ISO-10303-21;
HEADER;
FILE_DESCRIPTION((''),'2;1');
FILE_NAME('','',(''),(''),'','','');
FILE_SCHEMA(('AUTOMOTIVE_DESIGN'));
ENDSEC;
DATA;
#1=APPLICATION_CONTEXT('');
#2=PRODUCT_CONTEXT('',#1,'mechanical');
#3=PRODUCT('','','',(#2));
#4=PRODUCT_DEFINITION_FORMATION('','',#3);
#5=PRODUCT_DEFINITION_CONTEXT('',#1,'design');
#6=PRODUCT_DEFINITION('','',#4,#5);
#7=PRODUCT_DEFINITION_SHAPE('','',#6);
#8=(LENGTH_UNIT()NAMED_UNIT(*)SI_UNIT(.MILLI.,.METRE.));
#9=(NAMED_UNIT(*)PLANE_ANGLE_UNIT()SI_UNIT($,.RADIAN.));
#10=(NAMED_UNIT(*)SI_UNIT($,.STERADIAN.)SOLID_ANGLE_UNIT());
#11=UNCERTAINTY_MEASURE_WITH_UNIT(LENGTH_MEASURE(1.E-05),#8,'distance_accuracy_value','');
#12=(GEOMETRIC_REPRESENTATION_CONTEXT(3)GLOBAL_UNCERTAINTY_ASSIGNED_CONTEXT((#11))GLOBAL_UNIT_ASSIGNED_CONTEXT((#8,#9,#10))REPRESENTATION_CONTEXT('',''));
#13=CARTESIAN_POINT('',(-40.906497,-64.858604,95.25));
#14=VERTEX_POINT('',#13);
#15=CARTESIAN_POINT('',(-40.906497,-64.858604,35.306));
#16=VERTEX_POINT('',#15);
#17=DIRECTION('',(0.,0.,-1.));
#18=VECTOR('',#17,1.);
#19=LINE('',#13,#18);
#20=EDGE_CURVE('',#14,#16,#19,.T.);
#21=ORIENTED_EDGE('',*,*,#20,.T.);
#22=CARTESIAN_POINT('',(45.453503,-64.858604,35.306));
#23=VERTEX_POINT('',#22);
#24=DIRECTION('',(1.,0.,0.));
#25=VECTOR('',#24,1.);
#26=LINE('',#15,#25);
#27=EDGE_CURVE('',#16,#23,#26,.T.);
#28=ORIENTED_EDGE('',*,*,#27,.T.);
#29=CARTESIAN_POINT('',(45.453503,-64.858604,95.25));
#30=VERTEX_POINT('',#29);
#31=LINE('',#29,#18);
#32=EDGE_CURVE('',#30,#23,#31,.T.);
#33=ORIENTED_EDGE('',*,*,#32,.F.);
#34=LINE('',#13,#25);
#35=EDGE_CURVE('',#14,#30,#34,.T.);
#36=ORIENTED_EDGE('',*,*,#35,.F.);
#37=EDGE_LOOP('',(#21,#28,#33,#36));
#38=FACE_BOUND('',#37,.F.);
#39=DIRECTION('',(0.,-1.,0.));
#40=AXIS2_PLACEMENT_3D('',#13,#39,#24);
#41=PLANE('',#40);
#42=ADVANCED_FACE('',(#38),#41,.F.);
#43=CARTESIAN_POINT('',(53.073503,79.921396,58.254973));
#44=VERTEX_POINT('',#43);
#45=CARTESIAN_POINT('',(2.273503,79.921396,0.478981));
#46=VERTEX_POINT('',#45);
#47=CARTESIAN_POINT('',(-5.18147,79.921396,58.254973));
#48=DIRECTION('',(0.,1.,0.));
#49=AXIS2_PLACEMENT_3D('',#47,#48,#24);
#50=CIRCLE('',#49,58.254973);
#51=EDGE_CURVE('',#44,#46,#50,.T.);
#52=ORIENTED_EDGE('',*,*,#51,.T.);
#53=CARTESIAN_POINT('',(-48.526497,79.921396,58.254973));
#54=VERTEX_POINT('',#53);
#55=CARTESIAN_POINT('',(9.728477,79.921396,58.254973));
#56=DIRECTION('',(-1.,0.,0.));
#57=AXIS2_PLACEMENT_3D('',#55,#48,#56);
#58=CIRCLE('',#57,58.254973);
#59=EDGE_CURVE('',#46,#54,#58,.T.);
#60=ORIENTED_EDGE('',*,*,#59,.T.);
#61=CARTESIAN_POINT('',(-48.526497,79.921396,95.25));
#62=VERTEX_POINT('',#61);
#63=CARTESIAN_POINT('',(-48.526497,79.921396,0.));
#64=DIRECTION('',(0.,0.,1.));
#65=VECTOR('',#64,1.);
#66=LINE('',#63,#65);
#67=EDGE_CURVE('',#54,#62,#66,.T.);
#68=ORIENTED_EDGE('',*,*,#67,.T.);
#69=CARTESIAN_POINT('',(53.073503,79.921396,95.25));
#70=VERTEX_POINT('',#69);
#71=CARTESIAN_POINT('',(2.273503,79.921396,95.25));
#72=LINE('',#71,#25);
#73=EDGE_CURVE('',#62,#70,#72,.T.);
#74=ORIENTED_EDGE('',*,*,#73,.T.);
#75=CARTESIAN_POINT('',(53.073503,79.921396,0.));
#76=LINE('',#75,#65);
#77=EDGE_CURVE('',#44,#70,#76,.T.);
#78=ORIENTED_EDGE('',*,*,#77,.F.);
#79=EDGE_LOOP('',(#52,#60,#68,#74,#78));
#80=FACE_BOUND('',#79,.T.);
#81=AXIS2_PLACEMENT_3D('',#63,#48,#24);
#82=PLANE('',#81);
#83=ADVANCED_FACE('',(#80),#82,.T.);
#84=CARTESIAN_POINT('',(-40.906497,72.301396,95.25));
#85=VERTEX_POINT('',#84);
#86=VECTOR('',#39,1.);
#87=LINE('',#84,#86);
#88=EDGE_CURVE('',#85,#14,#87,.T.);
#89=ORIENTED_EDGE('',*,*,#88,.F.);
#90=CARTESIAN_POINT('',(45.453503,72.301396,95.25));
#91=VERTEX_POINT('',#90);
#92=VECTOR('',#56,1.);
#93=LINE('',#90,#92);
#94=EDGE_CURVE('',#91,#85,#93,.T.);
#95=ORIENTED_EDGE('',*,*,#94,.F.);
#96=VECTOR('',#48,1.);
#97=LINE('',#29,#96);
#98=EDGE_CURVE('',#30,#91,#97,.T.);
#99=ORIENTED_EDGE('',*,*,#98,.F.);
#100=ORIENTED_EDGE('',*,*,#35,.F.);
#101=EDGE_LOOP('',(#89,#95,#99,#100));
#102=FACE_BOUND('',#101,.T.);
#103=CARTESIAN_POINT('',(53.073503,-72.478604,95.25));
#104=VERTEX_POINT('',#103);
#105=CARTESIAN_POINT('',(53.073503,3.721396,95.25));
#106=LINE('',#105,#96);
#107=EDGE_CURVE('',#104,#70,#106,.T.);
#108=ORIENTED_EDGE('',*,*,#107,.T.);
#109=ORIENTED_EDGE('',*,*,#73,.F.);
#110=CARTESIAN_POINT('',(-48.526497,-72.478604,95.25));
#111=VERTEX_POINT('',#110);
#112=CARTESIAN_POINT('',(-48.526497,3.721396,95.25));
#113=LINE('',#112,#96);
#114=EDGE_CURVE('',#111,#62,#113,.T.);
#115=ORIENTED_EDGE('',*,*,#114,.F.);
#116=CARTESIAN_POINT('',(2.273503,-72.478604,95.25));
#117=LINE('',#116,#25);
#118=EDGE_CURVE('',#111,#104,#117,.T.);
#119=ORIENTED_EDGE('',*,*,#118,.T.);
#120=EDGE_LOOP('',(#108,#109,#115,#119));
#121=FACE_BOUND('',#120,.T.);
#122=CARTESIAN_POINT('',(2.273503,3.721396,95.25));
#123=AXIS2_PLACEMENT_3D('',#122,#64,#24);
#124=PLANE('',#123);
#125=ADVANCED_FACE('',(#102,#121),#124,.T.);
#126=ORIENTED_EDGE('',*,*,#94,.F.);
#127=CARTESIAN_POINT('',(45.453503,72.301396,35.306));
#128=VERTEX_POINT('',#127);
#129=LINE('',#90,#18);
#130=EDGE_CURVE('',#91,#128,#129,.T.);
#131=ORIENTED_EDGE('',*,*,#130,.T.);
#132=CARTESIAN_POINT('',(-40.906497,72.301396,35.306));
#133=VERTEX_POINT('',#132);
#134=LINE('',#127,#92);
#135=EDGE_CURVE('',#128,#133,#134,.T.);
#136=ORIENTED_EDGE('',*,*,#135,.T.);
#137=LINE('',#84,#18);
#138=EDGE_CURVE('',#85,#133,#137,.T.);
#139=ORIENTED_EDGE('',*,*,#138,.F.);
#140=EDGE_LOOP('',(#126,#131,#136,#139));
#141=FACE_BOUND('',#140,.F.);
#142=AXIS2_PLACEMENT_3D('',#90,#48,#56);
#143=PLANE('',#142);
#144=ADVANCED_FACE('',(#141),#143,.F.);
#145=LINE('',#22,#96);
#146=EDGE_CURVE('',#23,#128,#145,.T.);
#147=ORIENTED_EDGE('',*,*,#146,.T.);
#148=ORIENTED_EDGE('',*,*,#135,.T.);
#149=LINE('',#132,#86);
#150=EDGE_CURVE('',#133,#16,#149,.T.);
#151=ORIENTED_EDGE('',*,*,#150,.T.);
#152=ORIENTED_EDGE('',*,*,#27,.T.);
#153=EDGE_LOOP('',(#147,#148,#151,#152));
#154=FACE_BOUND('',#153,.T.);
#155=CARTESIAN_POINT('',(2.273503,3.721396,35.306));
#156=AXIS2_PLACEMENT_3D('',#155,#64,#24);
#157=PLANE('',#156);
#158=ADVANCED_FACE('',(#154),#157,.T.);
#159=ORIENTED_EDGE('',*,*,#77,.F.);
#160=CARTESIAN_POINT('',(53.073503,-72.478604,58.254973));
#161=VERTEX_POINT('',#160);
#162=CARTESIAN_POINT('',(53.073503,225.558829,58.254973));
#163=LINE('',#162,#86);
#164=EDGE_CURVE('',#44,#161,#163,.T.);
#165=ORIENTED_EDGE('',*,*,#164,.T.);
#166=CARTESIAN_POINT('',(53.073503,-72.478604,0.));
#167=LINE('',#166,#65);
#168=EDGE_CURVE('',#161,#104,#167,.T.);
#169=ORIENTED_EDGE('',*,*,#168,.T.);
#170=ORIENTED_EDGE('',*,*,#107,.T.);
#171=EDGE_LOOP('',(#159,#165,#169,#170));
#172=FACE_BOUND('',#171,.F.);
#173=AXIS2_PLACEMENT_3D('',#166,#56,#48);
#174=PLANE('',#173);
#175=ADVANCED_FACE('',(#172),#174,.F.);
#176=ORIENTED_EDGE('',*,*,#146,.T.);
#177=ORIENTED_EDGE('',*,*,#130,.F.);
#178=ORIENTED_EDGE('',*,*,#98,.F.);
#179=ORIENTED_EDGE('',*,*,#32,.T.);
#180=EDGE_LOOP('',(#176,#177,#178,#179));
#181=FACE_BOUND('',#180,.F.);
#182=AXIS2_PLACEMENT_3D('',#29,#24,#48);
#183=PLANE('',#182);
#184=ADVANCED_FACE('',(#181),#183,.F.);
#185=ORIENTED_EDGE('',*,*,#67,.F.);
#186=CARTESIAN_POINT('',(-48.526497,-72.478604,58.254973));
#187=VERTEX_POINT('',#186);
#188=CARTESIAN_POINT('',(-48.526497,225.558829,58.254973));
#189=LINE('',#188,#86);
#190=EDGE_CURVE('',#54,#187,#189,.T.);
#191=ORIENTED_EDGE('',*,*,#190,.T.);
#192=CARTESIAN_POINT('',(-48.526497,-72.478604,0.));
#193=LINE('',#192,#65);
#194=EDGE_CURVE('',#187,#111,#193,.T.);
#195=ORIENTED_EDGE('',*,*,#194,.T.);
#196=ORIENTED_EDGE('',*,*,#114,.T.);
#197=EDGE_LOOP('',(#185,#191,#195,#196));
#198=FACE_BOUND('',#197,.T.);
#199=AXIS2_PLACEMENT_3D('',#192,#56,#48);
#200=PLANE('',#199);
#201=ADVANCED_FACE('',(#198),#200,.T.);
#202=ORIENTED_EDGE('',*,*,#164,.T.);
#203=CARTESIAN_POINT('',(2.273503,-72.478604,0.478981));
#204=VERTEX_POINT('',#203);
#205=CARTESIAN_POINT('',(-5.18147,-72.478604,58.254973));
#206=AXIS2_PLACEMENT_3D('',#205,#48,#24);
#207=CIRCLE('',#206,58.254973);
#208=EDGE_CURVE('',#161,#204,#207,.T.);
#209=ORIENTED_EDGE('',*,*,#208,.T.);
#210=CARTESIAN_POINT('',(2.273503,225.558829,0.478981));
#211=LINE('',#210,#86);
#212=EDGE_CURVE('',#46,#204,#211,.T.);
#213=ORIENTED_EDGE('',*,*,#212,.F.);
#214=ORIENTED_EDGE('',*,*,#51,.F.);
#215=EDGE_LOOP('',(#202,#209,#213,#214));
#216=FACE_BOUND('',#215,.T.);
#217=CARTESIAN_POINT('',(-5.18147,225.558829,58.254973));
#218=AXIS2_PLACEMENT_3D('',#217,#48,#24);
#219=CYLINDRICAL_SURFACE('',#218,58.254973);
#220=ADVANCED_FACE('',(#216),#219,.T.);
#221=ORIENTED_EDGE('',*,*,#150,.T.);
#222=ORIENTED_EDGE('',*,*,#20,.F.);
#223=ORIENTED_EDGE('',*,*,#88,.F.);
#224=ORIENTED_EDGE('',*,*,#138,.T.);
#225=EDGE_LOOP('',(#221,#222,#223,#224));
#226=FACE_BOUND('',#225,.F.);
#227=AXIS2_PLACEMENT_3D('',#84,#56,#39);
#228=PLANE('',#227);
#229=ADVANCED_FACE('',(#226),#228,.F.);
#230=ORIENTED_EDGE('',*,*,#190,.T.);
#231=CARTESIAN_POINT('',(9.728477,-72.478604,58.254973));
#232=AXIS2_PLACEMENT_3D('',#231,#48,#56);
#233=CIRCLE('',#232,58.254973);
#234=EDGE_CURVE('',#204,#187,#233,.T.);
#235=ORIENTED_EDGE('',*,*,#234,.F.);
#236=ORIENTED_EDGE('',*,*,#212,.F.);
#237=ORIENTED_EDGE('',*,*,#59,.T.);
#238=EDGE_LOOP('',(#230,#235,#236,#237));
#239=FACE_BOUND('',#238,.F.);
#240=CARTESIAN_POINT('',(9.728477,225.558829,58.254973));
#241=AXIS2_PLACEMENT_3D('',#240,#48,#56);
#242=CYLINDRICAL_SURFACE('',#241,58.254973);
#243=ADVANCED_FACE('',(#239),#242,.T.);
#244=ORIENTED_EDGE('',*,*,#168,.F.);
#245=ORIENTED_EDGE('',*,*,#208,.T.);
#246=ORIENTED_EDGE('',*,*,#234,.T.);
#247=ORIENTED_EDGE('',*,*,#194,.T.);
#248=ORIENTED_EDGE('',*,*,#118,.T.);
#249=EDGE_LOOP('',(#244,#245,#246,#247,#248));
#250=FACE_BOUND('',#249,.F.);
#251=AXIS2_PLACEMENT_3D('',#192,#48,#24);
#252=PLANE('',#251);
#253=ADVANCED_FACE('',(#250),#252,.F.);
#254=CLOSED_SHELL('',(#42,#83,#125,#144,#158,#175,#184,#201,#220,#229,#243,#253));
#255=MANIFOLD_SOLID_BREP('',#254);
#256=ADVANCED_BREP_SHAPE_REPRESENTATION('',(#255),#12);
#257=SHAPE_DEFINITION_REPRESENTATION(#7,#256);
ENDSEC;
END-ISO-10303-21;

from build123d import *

# Parameters (mm, degrees)
F0_W        = 101.6
F0_H        = 152.4
F1_DEPTH    = 95.25
F2_T1_DEPTH = 443.6748663003
F4_DEPTH    = 59.944


# Not quite as in the source:
# - a fillet or chamfer that OpenCascade refuses, or shapes differently, is made with other operations: its cross-section is extruded or revolved along the edge and cut away or added


with BuildPart() as f1:
    # F0 (on Top) → F1 (new body)
    with BuildSketch(Plane.XY):
        with Locations((2.2735033583, 3.7213955075)):
            Rectangle(F0_W, F0_H)
    extrude(amount=F1_DEPTH)

    # F2: fillet of radius 58.2549732601 on 2 edges, made by hand

    # F2_s2 → F2_t1 (cut)
    with BuildSketch(Plane.XZ.offset(-225.5588286576)):
        with BuildLine():
            ThreePointArc((-48.5264966417, 58.2549732601), (-31.4640100116, 17.06248663), (9.7284766184, 0))
            Line((9.7284766184, 0), (-48.5264966417, 0))
            Line((-48.5264966417, 0), (-48.5264966417, 58.2549732601))
        make_face()
        with BuildLine():
            ThreePointArc((53.0735033583, 58.2549732601), (36.0110167283, 17.06248663), (-5.1814699017, 0))
            Line((-5.1814699017, 0), (53.0735033583, 0))
            Line((53.0735033583, 0), (53.0735033583, 58.2549732601))
        make_face()
    extrude(amount=F2_T1_DEPTH, mode=Mode.SUBTRACT)

    # F3 (on face) → F4 (cut)
    with BuildSketch(Plane.XY.offset(95.25)):
        Polygon((-40.9064966417, 17.4030140042), (-40.9064966417, -64.8586044925), (45.4535033583, -64.8586044925), (45.4535033583, 17.9895181209), (45.4535033583, 72.3013955075), (-40.9064966417, 72.3013955075), align=None)
    extrude(amount=-F4_DEPTH, mode=Mode.SUBTRACT)


solid = f1.part
